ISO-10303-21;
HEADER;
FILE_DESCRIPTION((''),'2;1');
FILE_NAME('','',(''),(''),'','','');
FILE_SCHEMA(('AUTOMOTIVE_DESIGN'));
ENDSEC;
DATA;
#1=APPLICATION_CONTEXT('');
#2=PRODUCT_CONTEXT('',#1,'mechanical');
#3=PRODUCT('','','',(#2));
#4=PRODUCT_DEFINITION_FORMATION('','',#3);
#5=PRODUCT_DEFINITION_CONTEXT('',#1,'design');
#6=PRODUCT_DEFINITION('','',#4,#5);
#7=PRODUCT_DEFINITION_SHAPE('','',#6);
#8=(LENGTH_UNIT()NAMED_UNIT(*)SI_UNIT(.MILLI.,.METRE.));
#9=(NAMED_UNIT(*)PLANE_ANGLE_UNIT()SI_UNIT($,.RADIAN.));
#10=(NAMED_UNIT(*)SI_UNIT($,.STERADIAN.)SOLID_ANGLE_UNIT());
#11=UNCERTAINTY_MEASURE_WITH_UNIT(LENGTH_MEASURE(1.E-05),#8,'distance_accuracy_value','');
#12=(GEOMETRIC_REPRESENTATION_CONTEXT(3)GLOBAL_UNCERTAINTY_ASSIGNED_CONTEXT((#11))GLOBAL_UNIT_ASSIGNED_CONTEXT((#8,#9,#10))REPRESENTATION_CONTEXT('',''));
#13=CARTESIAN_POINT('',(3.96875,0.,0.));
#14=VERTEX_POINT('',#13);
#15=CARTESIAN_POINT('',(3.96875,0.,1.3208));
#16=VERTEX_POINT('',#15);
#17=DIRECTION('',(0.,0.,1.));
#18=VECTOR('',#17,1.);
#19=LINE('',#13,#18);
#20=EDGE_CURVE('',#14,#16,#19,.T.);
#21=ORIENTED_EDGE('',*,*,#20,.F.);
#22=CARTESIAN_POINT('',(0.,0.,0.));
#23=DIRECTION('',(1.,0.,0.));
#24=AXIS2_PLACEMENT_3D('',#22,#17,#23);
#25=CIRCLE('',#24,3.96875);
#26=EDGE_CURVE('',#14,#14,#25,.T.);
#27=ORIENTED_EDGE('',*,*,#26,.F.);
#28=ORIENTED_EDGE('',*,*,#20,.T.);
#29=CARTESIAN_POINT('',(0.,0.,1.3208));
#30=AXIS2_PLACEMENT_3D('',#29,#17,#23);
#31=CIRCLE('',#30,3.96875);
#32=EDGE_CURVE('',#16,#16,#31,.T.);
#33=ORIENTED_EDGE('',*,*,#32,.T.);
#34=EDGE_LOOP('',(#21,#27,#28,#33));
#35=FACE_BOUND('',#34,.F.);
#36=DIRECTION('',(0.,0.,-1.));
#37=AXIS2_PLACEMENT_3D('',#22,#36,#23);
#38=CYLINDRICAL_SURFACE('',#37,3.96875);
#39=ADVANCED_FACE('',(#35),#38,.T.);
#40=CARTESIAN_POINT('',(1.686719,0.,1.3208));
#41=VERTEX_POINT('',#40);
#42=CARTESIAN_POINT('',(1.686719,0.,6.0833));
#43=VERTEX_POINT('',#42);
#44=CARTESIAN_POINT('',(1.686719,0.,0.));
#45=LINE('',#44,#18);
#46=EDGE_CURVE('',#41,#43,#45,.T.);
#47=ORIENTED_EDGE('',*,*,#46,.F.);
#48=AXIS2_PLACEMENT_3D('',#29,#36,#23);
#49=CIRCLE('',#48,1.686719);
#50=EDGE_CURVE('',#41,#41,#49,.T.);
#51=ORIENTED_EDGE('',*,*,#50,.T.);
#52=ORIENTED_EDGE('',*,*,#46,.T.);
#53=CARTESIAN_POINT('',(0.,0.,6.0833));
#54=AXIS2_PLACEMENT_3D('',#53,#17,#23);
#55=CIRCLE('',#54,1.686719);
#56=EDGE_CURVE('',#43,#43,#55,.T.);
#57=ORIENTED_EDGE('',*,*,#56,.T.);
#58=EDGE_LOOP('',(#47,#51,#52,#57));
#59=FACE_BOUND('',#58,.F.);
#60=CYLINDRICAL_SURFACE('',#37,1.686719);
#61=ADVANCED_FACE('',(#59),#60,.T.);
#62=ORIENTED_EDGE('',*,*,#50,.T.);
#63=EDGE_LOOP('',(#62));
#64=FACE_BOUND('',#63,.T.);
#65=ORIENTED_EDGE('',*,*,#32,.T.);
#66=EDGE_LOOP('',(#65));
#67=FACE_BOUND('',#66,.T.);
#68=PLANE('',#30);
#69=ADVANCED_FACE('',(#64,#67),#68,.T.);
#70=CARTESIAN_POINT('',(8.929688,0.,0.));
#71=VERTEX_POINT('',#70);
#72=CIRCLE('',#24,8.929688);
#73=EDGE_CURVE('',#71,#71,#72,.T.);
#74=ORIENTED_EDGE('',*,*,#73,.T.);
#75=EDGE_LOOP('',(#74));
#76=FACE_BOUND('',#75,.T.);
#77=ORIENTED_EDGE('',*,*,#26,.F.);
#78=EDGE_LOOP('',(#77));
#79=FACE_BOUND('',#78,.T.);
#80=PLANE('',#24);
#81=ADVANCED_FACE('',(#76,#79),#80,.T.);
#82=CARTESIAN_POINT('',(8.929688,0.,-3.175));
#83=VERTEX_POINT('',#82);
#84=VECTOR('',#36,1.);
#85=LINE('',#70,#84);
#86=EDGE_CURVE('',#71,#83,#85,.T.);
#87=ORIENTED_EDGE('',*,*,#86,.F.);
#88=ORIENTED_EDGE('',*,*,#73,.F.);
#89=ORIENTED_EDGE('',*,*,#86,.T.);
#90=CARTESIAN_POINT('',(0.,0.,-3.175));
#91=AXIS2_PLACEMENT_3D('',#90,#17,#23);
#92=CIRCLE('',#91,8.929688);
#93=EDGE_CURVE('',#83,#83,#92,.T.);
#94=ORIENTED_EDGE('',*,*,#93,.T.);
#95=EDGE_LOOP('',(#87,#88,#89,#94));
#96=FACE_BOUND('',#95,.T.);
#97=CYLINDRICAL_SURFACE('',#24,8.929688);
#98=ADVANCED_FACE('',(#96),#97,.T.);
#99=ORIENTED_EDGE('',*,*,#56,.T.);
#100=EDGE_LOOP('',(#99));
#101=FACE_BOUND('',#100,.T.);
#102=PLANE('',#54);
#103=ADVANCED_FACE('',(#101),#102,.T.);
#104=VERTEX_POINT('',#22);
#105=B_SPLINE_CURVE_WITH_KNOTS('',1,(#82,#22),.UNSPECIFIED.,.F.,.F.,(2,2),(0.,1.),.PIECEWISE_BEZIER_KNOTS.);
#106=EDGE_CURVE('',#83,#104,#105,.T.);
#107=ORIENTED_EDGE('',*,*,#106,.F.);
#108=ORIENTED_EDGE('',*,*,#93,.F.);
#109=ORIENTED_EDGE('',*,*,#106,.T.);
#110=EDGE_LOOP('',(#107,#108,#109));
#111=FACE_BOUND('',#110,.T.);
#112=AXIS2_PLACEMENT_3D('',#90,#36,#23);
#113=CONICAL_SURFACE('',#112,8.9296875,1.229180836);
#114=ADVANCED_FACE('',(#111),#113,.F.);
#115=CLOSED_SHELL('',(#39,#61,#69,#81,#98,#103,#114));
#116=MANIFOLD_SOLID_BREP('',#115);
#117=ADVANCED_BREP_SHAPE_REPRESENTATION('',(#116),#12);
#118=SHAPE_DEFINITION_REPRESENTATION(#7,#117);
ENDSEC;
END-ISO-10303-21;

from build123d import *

# Parameters (mm, degrees)
F0_R      = 8.9296875
F0_R_2    = 3.96875
F0_R_3    = 3.175
F0_R_4    = 1.68671875
F1_DEPTH  = 3.175
F2_DEPTH  = 1.3208
F3_DEPTH  = 6.0833
F1_FACE_R = 8.9296875


# Not quite as in the source:
# - a length typed as a fraction of an inch, garbled in the dataset ("3 / 203.2 mm" for 3/8 in), is restored


with BuildPart() as f1:
    # F0 (on Top) → F1 (new body)
    with BuildSketch(Plane.XY):
        Circle(F0_R)
        Circle(F0_R_2, mode=Mode.SUBTRACT)
        Circle(F0_R_2)
        Circle(F0_R_3, mode=Mode.SUBTRACT)
        Circle(F0_R_3)
        Circle(F0_R_4, mode=Mode.SUBTRACT)
        Circle(F0_R_4)
    extrude(amount=-F1_DEPTH)

    # F0 (on Top) → F2 (join)
    with BuildSketch(Plane.XY):
        Circle(F0_R_2)
        Circle(F0_R_3, mode=Mode.SUBTRACT)
        Circle(F0_R_3)
        Circle(F0_R_4, mode=Mode.SUBTRACT)
        Circle(F0_R_4)
    extrude(amount=F2_DEPTH)

    # F0 (on Top) → F3 (join)
    with BuildSketch(Plane.XY):
        Circle(F0_R_4)
    extrude(amount=F3_DEPTH)

    # F1_face (on face) → F4 section 0
    with BuildSketch(Plane(origin=(0, 0, -3.175), x_dir=(1, 0, 0), z_dir=(0, 0, -1)), mode=Mode.PRIVATE) as f4_s0:
        Circle(F1_FACE_R)
    loft([f4_s0.sketch, Vertex(0, 0, 0)], mode=Mode.SUBTRACT)


solid = f1.part
